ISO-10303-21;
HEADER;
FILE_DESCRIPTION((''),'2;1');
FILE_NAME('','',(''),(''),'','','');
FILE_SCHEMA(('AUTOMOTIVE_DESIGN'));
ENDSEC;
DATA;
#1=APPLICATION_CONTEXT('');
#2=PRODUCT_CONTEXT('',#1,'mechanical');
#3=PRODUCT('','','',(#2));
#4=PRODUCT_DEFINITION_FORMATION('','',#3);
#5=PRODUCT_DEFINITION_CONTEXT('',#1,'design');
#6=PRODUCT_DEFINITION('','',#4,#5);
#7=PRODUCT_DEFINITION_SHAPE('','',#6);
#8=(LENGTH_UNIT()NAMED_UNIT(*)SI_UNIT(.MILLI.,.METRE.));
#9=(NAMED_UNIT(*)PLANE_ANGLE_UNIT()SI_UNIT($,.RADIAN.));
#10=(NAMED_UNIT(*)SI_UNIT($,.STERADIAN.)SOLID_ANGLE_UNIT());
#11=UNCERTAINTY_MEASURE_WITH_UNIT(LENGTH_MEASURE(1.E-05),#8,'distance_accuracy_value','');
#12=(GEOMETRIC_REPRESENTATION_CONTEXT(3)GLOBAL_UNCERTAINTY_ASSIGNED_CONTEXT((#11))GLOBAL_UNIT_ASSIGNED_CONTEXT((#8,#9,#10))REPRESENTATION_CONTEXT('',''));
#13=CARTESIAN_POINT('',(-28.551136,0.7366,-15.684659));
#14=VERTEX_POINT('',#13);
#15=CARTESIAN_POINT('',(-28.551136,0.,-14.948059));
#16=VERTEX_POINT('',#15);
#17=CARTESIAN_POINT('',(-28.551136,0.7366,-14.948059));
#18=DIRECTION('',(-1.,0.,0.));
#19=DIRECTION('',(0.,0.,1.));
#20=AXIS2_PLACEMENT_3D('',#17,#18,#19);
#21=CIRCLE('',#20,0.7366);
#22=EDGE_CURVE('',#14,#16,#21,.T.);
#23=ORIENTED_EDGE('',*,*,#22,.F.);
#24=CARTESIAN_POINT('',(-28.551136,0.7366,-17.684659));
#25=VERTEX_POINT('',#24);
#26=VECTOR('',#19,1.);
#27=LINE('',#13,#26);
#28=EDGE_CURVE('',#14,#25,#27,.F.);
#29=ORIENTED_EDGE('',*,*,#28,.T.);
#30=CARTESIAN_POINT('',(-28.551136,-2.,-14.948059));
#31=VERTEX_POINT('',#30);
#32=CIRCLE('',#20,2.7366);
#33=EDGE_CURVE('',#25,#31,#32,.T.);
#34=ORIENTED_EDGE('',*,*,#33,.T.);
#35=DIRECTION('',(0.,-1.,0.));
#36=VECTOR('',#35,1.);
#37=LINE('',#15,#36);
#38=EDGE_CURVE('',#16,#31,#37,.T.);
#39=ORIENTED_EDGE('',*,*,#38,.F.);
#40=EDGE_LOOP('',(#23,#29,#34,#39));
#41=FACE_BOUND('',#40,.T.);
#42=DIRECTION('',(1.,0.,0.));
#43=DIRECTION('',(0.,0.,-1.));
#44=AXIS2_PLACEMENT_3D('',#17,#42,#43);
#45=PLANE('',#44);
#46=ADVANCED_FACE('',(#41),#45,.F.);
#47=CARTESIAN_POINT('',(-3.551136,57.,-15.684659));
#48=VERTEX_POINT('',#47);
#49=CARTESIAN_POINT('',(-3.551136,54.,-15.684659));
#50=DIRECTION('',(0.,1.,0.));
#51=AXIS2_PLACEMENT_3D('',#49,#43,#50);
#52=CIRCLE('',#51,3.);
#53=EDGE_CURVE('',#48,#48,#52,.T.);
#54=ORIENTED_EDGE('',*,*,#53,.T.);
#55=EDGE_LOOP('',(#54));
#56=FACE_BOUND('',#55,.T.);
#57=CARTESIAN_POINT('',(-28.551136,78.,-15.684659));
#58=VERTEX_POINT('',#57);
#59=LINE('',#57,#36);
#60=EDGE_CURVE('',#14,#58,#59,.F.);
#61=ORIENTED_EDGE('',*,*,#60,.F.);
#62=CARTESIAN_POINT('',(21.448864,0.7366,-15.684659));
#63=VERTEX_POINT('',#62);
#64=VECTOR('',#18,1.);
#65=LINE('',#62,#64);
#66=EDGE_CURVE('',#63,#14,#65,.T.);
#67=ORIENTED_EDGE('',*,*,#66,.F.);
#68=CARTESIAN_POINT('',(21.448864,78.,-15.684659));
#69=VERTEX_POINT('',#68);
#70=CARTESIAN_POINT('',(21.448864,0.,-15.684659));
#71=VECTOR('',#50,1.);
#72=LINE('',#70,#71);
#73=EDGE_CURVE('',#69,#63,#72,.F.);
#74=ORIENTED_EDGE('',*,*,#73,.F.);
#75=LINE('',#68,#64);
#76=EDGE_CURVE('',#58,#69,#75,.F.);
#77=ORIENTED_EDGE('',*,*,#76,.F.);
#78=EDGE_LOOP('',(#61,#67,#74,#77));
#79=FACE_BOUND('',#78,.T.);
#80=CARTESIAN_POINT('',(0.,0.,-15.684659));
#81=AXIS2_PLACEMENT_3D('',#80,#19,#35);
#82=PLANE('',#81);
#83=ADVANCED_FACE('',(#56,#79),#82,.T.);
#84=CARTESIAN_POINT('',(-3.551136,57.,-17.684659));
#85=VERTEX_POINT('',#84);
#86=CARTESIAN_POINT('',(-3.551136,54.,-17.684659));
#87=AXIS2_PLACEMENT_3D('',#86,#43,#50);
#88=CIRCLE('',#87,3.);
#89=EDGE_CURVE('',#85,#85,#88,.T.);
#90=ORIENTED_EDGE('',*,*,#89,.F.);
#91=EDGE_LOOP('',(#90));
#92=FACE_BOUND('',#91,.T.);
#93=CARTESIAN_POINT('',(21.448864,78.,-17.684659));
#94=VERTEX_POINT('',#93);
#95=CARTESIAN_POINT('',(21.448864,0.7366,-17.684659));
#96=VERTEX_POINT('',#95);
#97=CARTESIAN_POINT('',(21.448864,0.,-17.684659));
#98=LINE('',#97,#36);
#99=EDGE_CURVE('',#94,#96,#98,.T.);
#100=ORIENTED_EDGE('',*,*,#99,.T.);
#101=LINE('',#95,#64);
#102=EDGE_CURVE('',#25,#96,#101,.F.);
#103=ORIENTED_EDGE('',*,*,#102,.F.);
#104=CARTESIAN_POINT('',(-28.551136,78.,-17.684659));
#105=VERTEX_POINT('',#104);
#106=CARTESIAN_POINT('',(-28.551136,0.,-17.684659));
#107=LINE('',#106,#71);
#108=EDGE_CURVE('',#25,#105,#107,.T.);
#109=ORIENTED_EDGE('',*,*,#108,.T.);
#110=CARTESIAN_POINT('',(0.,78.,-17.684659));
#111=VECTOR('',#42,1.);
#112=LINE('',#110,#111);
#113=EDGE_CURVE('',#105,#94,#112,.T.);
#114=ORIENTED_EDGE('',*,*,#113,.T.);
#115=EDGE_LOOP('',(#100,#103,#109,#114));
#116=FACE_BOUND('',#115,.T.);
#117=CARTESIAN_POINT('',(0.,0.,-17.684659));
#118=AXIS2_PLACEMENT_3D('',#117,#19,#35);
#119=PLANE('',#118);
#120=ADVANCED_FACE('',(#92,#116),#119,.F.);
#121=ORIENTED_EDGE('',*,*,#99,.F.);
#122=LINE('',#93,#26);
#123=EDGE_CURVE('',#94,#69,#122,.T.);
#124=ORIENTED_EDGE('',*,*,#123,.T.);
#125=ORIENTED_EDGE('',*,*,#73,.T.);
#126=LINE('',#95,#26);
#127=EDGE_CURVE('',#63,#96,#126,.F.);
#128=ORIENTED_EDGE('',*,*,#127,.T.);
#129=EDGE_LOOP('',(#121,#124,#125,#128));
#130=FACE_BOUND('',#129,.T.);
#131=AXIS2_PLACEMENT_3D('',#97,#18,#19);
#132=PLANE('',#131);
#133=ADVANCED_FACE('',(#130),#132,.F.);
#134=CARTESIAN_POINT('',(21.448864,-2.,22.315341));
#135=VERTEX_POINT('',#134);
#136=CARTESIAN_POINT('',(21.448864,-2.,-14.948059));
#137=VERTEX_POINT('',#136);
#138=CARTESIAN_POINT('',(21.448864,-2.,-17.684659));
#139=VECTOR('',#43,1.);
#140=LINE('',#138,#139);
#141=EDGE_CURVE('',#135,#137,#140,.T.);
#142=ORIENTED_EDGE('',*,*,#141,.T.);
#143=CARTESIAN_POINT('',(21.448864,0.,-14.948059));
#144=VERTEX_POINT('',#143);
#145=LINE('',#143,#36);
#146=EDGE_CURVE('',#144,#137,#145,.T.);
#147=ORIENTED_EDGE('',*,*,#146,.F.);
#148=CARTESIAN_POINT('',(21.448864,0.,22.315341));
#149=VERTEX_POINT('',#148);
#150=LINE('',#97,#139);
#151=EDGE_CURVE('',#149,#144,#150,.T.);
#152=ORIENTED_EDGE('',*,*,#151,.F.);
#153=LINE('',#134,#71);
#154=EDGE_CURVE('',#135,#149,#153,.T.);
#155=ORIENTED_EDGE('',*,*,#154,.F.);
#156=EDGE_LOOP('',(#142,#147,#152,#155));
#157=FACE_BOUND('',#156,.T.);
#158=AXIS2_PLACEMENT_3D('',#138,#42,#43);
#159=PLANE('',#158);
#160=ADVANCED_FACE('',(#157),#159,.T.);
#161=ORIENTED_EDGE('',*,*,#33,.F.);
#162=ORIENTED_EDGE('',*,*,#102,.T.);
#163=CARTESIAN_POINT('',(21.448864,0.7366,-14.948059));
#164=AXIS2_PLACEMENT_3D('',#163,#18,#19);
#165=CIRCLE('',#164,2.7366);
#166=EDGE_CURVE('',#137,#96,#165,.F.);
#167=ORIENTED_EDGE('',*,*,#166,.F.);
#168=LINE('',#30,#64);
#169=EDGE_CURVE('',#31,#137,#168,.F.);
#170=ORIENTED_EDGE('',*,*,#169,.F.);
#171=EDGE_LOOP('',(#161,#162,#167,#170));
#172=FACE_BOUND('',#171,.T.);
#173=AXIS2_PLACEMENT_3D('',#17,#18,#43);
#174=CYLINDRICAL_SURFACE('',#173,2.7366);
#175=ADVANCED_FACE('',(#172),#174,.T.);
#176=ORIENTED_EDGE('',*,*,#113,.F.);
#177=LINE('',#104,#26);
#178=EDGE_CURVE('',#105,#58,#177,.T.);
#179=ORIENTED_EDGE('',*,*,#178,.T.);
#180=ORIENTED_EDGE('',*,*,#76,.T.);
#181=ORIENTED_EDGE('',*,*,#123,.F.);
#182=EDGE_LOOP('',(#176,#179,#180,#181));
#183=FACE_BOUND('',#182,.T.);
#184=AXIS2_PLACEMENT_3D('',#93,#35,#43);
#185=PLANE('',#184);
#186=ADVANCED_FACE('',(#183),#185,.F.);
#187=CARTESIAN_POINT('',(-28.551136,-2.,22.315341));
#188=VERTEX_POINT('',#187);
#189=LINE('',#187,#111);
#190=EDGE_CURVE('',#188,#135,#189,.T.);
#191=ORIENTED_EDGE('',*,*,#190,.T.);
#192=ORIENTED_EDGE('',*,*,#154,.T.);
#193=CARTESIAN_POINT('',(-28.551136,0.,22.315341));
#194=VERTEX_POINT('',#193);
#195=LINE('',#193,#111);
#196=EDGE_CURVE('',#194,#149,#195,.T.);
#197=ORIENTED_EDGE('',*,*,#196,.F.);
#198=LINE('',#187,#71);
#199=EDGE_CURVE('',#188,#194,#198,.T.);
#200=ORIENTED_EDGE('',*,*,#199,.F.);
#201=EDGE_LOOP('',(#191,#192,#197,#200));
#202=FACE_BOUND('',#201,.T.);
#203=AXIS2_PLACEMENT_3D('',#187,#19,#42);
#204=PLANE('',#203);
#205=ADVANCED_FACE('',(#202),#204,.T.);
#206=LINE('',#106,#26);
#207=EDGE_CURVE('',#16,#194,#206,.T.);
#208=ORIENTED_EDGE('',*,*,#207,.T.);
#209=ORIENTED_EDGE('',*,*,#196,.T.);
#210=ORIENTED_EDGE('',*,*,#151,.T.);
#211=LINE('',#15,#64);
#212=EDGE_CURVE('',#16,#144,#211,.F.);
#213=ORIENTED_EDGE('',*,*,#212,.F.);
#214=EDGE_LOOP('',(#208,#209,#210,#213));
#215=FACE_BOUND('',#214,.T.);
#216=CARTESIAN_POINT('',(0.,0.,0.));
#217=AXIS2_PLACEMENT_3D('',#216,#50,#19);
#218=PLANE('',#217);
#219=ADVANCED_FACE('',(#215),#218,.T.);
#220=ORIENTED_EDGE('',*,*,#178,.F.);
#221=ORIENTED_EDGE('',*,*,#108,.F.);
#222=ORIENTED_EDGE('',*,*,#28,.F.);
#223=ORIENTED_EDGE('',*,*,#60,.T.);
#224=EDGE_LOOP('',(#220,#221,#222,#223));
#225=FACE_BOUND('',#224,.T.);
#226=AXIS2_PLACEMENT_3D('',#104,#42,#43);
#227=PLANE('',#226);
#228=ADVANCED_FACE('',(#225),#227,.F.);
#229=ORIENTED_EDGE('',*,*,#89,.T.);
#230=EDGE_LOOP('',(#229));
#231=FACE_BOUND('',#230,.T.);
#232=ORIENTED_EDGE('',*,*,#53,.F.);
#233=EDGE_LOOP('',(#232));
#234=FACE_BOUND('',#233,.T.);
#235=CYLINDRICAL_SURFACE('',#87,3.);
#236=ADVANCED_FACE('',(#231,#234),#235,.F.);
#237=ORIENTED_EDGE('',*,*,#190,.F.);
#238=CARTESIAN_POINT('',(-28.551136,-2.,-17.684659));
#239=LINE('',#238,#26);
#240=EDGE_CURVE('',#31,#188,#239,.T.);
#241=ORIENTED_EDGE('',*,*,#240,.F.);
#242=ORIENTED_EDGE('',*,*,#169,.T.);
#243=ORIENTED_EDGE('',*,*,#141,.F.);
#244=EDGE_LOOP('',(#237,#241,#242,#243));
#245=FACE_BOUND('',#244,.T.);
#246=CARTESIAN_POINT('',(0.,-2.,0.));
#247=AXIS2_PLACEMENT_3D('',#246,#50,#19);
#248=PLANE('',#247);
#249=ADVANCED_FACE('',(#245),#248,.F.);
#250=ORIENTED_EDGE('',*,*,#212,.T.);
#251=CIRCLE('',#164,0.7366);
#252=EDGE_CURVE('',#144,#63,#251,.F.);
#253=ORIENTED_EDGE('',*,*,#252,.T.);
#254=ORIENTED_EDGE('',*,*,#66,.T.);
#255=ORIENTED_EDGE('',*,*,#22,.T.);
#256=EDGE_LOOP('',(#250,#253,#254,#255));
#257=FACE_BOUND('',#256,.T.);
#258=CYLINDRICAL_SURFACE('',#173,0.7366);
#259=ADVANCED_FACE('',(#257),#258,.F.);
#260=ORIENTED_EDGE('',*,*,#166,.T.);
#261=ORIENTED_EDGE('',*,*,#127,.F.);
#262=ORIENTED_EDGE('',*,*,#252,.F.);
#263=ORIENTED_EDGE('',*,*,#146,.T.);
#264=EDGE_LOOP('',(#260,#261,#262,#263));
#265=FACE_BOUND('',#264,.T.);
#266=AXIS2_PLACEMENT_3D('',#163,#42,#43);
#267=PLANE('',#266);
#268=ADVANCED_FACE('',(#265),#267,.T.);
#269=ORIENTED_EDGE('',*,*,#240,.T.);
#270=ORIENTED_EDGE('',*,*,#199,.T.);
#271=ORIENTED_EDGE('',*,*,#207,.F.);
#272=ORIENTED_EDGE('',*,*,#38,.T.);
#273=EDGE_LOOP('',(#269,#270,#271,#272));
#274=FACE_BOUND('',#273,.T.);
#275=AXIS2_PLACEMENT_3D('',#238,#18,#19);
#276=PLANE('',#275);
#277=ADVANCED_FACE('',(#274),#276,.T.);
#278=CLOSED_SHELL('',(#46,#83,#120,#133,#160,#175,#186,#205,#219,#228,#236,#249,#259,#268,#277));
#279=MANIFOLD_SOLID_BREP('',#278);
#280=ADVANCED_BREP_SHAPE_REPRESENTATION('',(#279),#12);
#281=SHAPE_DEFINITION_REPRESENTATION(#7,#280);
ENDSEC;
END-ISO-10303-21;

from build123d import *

# Parameters (mm, degrees)
SKETCH1_W                    = 50
SKETCH1_H                    = 40
BASE_FLANGE1_DEPTH           = 2
EDGE_FLANGE1_STRIP_W         = 9.4732
EDGE_FLANGE1_STRIP_H         = 2
EDGE_FLANGE1_STRIP_CUT_DEPTH = 50
EDGE_FLANGE1_DEPTH           = 50
ADVANCEDHOLE2_START          = -17.684659091
ADVANCEDHOLE2_OUTLINE_R      = 3
ADVANCEDHOLE2_DEPTH          = 2


# Read off the part's stored shape, not the designer's step: AdvancedHole2
# Sheet-metal steps are written as plain solids
with BuildPart() as part:
    # Sketch1 → Base-Flange1 (new body)
    with BuildSketch(Plane(origin=(0, 0, 0), x_dir=(1, 0, 0), z_dir=(0, 1, 0))):
        with Locations((-3.551136364, -2.315340909)):
            Rectangle(SKETCH1_W, SKETCH1_H)
    extrude(amount=-BASE_FLANGE1_DEPTH)

    # Edge-Flange1 strip (across the edge) → Edge-Flange1 strip cut (cut)
    with BuildSketch(Plane(origin=(21.448863636, 0, -17.684659091), x_dir=(0, 0, 1), z_dir=(-1, 0, 0))):
        with Locations((-2, -1)):
            Rectangle(EDGE_FLANGE1_STRIP_W, EDGE_FLANGE1_STRIP_H)
    extrude(amount=EDGE_FLANGE1_STRIP_CUT_DEPTH, mode=Mode.SUBTRACT)

    # Edge-Flange1 section (across the edge) → Edge-Flange1 (add)
    with BuildSketch(Plane(origin=(21.448863636, 0, -17.684659091), x_dir=(0, 0, 1), z_dir=(-1, 0, 0))):
        with BuildLine():
            Line((0, 0.7366), (0, 78))
            Line((0, 78), (2, 78))
            Line((2, 78), (2, 0.7366))
            ThreePointArc((2, 0.7366), (2.215745145, 0.215745145), (2.7366, 0))
            Line((2.7366, 0), (2.7366, -2))
            ThreePointArc((2.7366, -2), (0.801531583, -1.198468417), (0, 0.7366))
        make_face()
    extrude(amount=EDGE_FLANGE1_DEPTH)

    # AdvancedHole2 outline → AdvancedHole2 (cut)
    with BuildSketch(Plane.XY.offset(ADVANCEDHOLE2_START)):
        with Locations((-3.551136364, 54)):
            Circle(ADVANCEDHOLE2_OUTLINE_R)
    extrude(amount=ADVANCEDHOLE2_DEPTH, mode=Mode.SUBTRACT)


solid = part.part
